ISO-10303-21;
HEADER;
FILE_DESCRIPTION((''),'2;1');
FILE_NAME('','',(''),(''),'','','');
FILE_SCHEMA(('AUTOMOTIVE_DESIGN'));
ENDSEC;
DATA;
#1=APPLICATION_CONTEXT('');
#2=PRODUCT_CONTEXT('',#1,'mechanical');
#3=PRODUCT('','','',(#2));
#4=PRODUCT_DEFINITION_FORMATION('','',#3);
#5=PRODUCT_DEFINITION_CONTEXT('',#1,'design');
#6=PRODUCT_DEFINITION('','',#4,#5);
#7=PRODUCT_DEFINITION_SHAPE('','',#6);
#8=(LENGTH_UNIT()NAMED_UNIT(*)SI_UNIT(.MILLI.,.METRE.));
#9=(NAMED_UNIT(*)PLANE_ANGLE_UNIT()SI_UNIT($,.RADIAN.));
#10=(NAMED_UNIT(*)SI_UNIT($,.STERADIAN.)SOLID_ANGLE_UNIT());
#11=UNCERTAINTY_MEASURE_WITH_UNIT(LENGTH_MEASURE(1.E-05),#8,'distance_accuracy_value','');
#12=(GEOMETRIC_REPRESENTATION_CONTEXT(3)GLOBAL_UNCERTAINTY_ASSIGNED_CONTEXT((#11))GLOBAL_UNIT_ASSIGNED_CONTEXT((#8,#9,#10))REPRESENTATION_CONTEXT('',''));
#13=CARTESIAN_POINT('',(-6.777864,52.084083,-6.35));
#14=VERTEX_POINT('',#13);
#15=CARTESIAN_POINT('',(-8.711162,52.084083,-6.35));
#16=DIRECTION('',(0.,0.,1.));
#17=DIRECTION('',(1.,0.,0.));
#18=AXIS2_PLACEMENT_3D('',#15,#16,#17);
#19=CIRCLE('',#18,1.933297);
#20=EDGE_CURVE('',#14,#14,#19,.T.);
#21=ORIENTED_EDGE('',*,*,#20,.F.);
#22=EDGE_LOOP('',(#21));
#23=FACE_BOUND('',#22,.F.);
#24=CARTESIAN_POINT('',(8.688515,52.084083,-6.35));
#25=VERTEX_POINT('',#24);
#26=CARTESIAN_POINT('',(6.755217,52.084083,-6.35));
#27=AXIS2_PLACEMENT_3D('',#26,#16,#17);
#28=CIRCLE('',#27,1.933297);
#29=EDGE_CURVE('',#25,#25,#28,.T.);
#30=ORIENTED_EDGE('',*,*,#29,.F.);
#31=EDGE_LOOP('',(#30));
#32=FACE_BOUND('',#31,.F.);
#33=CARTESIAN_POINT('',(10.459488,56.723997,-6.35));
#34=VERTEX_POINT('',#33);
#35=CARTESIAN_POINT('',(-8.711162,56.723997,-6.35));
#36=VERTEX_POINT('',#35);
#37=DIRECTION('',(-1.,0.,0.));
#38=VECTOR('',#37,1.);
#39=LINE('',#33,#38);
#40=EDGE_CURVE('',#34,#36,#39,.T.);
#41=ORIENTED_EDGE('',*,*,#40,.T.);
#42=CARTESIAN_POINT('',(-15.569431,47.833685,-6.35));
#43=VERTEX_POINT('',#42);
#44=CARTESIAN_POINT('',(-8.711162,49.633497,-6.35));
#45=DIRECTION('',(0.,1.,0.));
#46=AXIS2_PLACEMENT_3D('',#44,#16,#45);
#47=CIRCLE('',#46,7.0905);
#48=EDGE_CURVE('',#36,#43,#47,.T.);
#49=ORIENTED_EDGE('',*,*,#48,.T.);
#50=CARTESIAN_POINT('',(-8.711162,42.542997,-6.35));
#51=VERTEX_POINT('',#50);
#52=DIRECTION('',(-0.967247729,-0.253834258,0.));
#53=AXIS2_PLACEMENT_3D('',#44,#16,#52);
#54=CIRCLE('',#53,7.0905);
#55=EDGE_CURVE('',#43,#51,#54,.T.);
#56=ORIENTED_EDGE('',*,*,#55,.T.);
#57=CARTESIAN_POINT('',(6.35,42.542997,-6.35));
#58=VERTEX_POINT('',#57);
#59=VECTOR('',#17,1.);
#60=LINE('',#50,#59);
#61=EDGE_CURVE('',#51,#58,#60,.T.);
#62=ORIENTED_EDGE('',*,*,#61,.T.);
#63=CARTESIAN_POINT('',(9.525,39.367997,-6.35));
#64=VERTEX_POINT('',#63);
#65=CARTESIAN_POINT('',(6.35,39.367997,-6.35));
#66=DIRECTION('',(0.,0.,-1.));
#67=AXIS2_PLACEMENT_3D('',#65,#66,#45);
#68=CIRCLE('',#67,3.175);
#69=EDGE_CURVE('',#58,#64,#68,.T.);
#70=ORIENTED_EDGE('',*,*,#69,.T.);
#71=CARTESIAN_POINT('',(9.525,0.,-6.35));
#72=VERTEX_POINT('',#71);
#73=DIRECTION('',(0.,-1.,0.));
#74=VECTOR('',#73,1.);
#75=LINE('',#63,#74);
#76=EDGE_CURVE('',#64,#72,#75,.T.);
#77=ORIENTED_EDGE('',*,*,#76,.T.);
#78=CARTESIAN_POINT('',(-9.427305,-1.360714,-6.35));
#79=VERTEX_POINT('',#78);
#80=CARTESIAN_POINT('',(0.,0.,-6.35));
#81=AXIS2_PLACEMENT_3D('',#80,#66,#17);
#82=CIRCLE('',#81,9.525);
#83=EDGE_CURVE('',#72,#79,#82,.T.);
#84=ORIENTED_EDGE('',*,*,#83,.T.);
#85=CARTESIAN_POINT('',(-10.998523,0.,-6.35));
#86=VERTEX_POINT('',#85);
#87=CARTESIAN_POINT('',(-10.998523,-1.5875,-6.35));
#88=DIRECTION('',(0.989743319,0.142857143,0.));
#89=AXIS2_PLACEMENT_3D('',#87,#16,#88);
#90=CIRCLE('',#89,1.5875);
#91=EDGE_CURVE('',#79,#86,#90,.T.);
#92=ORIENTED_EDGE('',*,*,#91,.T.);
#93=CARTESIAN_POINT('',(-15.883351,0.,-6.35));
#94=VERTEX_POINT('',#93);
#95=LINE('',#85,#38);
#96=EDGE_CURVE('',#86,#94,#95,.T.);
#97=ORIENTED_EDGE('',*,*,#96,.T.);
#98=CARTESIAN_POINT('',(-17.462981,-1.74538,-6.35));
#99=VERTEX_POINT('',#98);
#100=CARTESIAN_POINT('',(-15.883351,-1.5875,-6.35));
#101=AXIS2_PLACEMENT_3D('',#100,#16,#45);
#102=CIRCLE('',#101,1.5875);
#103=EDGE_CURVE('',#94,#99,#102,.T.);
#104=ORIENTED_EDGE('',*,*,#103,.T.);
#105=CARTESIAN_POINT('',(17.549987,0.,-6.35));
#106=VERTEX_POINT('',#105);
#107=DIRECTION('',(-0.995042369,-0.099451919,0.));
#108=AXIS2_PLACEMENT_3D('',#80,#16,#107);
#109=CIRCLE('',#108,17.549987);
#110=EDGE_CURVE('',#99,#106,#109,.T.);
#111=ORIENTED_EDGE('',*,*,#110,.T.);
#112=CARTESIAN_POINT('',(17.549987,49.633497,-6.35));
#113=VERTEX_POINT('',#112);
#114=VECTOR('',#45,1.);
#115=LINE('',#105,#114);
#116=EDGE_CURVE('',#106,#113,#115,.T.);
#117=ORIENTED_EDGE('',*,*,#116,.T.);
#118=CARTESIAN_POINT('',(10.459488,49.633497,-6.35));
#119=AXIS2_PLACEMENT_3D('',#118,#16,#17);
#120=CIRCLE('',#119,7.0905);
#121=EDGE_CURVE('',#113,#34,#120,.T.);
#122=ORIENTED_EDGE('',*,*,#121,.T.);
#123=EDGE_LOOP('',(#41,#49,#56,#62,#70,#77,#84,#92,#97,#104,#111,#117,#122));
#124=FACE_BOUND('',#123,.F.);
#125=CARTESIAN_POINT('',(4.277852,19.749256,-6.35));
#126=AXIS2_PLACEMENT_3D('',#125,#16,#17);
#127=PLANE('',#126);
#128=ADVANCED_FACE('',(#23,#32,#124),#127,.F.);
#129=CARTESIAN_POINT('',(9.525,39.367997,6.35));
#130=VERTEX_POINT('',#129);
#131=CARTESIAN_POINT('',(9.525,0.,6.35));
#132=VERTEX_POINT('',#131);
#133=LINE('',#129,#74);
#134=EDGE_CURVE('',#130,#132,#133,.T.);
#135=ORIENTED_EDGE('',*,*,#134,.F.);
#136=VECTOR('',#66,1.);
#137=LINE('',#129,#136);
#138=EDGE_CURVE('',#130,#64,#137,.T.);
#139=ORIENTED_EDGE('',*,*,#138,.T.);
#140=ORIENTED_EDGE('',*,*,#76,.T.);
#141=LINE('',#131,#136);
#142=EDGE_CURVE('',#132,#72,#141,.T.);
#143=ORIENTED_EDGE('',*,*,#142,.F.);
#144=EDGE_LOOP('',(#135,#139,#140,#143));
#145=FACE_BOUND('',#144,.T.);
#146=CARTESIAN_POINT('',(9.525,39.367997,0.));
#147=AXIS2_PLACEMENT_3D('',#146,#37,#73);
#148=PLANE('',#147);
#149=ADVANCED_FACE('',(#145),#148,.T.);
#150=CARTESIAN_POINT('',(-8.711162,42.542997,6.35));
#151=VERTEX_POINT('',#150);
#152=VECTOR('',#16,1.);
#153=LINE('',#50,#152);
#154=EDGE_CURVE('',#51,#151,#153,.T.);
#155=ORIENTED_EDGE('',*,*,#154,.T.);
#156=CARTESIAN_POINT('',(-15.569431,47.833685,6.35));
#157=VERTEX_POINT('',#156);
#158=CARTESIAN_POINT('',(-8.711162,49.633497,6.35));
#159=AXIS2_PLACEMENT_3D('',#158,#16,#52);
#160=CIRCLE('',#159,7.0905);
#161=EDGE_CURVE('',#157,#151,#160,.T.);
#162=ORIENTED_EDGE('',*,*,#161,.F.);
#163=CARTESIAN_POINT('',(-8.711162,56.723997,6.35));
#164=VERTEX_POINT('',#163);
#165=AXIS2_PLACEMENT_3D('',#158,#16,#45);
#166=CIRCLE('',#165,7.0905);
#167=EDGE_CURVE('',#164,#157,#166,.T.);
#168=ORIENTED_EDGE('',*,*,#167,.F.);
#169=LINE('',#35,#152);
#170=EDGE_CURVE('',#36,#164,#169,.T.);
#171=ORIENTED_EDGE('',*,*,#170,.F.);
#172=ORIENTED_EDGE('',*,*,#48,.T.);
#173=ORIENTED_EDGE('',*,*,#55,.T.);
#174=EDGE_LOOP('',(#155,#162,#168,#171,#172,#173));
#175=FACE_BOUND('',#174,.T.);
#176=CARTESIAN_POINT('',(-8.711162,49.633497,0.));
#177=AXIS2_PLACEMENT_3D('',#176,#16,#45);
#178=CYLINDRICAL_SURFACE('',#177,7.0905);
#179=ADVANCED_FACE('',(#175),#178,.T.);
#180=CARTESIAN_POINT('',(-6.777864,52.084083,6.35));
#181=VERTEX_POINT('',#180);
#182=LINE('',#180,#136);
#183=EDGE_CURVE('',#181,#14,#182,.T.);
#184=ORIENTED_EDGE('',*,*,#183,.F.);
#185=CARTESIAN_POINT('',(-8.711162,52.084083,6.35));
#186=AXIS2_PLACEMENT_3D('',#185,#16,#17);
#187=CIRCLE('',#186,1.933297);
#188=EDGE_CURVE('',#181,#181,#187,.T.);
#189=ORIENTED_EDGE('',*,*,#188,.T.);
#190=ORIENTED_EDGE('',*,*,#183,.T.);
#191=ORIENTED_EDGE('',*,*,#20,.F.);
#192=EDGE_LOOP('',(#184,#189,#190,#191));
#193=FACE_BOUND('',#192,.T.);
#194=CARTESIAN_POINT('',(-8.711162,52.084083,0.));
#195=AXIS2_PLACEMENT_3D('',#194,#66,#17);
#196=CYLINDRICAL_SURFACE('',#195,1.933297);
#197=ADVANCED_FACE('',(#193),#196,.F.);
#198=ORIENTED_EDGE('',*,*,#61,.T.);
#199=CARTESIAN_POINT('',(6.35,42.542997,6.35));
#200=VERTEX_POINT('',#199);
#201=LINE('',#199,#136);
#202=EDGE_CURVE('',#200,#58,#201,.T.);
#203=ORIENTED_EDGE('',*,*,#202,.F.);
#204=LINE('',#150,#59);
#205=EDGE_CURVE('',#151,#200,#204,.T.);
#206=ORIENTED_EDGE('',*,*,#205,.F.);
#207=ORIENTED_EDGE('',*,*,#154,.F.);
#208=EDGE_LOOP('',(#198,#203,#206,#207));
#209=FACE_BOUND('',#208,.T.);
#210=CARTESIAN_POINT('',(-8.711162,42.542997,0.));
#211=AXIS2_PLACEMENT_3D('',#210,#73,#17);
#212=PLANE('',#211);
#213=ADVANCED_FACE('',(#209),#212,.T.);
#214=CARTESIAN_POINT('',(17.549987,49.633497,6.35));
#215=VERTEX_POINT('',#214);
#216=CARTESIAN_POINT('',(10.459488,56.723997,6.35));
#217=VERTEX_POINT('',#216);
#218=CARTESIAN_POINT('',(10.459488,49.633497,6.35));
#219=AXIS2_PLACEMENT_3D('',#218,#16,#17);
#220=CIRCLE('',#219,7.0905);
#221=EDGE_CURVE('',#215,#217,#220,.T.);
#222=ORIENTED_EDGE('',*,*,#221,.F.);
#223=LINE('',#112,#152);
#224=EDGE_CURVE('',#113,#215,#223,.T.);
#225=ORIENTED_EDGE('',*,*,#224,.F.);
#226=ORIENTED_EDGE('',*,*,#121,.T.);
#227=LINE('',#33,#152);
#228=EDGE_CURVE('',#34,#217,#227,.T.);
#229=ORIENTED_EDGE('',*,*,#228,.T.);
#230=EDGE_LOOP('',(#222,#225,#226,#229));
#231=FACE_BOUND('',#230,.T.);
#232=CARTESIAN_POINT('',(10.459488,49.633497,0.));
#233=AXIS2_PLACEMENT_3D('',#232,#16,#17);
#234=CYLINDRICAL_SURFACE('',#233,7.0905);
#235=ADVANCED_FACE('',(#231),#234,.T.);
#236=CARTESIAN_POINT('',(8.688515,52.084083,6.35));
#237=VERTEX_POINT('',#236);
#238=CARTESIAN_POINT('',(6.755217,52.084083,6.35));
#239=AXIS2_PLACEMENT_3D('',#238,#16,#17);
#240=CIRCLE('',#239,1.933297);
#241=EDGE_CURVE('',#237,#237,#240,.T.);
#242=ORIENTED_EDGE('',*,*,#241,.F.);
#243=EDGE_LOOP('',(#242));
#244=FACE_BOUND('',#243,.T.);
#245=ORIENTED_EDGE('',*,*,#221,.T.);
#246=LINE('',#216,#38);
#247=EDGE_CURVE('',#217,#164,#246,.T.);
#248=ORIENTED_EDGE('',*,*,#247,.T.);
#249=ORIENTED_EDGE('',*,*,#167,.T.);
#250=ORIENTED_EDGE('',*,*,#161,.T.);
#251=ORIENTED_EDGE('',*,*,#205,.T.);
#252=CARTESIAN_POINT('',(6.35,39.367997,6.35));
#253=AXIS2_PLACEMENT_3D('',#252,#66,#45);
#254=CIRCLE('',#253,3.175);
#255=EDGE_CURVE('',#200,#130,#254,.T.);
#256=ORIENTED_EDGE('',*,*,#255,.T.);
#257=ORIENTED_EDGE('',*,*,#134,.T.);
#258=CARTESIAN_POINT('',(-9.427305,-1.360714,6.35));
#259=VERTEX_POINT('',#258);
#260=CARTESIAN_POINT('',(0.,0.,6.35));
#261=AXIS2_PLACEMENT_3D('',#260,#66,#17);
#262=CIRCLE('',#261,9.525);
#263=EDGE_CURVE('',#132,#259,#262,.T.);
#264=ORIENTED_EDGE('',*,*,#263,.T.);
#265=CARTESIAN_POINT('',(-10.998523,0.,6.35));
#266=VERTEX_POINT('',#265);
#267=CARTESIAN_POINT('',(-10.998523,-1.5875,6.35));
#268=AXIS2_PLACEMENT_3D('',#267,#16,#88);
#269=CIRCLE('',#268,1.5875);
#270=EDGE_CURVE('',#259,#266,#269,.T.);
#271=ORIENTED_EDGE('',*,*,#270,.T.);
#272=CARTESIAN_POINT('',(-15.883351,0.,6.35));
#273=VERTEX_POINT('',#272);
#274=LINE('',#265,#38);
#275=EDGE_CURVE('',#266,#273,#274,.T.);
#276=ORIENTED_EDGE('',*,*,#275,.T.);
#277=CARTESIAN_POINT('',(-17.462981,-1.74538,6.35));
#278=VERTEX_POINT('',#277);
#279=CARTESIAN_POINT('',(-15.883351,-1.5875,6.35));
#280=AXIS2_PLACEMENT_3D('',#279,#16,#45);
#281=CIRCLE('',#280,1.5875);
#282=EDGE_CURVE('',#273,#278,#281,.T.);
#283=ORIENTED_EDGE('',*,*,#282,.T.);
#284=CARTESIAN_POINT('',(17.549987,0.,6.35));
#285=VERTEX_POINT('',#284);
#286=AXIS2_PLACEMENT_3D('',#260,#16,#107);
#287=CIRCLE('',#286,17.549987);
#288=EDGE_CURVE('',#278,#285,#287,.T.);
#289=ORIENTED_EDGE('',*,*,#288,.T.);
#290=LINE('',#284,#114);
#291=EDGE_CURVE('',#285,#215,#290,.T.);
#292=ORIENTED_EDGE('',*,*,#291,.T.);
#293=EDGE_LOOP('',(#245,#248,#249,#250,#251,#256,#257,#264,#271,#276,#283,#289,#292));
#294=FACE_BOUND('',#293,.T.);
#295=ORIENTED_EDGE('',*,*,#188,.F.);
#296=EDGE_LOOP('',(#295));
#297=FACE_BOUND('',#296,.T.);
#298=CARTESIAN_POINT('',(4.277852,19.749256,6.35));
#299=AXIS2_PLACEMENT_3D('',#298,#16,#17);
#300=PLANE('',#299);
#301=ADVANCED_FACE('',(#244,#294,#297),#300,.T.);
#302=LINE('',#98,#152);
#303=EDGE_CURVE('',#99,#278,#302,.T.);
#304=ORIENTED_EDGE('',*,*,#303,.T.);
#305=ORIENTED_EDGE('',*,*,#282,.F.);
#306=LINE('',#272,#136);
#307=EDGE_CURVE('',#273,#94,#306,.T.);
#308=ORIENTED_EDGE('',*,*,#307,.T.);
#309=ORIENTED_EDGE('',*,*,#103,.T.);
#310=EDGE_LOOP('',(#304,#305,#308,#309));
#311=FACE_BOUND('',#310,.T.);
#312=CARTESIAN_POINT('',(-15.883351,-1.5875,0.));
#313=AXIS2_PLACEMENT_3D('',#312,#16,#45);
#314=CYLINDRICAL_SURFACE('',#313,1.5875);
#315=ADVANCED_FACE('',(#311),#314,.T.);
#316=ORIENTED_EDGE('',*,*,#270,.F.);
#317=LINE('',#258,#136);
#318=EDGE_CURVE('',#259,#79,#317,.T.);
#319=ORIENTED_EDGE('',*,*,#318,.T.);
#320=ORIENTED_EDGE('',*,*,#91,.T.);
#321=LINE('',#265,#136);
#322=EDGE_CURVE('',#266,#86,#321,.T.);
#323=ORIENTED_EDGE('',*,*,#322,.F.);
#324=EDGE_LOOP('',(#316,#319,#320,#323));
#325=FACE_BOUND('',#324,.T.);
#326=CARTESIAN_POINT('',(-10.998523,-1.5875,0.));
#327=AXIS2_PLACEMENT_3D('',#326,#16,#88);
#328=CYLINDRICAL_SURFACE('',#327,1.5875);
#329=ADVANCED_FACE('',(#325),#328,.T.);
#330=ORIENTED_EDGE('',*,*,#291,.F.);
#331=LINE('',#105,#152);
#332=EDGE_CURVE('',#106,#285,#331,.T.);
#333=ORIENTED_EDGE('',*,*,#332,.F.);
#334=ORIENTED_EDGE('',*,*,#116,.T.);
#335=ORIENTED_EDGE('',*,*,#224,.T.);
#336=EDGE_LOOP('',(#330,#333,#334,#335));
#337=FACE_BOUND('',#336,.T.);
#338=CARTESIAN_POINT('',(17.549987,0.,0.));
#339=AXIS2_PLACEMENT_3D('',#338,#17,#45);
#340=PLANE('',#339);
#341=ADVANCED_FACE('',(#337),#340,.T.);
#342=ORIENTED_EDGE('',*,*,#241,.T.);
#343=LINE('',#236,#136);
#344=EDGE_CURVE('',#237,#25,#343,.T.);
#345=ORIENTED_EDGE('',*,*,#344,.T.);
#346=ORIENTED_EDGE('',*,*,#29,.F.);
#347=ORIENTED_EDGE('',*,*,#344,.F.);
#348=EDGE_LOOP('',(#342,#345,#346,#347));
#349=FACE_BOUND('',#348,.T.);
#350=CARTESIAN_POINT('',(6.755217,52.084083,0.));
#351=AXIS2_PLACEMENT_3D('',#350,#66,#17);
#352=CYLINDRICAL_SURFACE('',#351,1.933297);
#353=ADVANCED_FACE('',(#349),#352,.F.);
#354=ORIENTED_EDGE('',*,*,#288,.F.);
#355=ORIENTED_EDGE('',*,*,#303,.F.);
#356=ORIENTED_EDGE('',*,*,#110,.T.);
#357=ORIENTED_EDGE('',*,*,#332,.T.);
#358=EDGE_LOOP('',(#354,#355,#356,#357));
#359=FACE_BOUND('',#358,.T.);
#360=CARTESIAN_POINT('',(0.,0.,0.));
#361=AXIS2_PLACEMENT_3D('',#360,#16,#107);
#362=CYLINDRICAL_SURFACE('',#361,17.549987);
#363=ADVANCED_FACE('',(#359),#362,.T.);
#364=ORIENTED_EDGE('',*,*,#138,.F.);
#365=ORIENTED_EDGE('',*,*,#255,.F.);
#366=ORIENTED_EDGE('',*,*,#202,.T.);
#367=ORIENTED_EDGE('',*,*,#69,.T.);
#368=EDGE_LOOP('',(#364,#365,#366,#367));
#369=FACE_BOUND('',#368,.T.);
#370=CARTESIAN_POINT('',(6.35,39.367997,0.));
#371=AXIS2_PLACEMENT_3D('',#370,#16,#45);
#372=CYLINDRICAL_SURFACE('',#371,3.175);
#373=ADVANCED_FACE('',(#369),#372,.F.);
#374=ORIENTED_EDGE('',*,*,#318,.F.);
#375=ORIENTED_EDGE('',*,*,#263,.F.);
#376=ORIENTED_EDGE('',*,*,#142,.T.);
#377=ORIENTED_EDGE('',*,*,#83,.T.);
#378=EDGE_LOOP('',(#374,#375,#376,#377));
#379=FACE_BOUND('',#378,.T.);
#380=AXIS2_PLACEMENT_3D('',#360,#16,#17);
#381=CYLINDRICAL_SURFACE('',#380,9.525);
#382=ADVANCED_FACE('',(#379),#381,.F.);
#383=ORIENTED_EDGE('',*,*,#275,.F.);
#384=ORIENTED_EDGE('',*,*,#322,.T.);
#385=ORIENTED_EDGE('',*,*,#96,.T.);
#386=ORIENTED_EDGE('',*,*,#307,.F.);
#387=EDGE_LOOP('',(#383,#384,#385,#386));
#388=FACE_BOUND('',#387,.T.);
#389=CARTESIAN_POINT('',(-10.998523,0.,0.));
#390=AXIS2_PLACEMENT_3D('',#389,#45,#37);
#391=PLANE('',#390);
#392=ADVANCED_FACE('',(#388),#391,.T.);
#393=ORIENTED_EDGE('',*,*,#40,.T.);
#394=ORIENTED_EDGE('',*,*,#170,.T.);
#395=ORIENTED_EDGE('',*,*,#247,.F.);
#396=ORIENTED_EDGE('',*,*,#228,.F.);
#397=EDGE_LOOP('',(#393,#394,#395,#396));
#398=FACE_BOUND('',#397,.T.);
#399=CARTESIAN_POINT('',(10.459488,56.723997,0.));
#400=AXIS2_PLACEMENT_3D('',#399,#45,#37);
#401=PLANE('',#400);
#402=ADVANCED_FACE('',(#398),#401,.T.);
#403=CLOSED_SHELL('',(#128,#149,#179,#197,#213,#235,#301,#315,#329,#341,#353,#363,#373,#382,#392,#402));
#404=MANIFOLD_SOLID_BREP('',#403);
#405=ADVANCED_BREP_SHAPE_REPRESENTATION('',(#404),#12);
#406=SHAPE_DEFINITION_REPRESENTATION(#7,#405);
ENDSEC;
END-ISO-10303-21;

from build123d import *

# Parameters (mm, degrees)
F0_R     = 1.9332973568
F1_DEPTH = 6.35


# Not quite as in the source:
# - a feature names something its author has since deleted; it is built from what else it names


with BuildPart() as f1:
    # F0 (on Top) → F1 (new body, symmetric)
    with BuildSketch(Plane.XY):
        with BuildLine():
            ThreePointArc((-15.8833512398, 0), (-17.0603794097, -0.5222484159), (-17.4629810004, -1.7453799214))
            ThreePointArc((-17.4629810004, -1.7453799214), (0.8737735944, -17.5282222771), (17.5499873644, 0))
            Line((17.5499873644, 0), (17.5499873644, 49.6334969772))
            ThreePointArc((17.5499873644, 49.6334969772), (15.4732281229, 54.6472373039), (10.4594877962, 56.7239965454))
            Line((10.4594877962, 56.7239965454), (-8.711161666, 56.7239965454))
            ThreePointArc((-8.711161666, 56.7239965454), (-14.3252844017, 53.9644102799), (-15.5694312717, 47.8336852809))
            ThreePointArc((-15.5694312717, 47.8336852809), (-13.0420749687, 44.0193742416), (-8.711161666, 42.5429974091))
            Line((-8.711161666, 42.5429974091), (6.35, 42.5429974091))
            ThreePointArc((6.35, 42.5429974091), (8.5950640303, 41.6130614393), (9.525, 39.3679974091))
            Line((9.525, 39.3679974091), (9.525, 0))
            ThreePointArc((9.525, 0), (0.6821084333, -9.5005448836), (-9.4273051098, -1.3607142857))
            ThreePointArc((-9.4273051098, -1.3607142857), (-9.9592599258, -0.3874627982), (-10.9985226281, 0))
            Line((-10.9985226281, 0), (-15.8833512398, 0))
        make_face()
        with Locations((-8.711161666, 52.084082889)):
            Circle(F0_R, mode=Mode.SUBTRACT)
        with Locations((6.7552171887, 52.084082889)):
            Circle(F0_R, mode=Mode.SUBTRACT)
    extrude(amount=F1_DEPTH, both=True)


solid = f1.part
